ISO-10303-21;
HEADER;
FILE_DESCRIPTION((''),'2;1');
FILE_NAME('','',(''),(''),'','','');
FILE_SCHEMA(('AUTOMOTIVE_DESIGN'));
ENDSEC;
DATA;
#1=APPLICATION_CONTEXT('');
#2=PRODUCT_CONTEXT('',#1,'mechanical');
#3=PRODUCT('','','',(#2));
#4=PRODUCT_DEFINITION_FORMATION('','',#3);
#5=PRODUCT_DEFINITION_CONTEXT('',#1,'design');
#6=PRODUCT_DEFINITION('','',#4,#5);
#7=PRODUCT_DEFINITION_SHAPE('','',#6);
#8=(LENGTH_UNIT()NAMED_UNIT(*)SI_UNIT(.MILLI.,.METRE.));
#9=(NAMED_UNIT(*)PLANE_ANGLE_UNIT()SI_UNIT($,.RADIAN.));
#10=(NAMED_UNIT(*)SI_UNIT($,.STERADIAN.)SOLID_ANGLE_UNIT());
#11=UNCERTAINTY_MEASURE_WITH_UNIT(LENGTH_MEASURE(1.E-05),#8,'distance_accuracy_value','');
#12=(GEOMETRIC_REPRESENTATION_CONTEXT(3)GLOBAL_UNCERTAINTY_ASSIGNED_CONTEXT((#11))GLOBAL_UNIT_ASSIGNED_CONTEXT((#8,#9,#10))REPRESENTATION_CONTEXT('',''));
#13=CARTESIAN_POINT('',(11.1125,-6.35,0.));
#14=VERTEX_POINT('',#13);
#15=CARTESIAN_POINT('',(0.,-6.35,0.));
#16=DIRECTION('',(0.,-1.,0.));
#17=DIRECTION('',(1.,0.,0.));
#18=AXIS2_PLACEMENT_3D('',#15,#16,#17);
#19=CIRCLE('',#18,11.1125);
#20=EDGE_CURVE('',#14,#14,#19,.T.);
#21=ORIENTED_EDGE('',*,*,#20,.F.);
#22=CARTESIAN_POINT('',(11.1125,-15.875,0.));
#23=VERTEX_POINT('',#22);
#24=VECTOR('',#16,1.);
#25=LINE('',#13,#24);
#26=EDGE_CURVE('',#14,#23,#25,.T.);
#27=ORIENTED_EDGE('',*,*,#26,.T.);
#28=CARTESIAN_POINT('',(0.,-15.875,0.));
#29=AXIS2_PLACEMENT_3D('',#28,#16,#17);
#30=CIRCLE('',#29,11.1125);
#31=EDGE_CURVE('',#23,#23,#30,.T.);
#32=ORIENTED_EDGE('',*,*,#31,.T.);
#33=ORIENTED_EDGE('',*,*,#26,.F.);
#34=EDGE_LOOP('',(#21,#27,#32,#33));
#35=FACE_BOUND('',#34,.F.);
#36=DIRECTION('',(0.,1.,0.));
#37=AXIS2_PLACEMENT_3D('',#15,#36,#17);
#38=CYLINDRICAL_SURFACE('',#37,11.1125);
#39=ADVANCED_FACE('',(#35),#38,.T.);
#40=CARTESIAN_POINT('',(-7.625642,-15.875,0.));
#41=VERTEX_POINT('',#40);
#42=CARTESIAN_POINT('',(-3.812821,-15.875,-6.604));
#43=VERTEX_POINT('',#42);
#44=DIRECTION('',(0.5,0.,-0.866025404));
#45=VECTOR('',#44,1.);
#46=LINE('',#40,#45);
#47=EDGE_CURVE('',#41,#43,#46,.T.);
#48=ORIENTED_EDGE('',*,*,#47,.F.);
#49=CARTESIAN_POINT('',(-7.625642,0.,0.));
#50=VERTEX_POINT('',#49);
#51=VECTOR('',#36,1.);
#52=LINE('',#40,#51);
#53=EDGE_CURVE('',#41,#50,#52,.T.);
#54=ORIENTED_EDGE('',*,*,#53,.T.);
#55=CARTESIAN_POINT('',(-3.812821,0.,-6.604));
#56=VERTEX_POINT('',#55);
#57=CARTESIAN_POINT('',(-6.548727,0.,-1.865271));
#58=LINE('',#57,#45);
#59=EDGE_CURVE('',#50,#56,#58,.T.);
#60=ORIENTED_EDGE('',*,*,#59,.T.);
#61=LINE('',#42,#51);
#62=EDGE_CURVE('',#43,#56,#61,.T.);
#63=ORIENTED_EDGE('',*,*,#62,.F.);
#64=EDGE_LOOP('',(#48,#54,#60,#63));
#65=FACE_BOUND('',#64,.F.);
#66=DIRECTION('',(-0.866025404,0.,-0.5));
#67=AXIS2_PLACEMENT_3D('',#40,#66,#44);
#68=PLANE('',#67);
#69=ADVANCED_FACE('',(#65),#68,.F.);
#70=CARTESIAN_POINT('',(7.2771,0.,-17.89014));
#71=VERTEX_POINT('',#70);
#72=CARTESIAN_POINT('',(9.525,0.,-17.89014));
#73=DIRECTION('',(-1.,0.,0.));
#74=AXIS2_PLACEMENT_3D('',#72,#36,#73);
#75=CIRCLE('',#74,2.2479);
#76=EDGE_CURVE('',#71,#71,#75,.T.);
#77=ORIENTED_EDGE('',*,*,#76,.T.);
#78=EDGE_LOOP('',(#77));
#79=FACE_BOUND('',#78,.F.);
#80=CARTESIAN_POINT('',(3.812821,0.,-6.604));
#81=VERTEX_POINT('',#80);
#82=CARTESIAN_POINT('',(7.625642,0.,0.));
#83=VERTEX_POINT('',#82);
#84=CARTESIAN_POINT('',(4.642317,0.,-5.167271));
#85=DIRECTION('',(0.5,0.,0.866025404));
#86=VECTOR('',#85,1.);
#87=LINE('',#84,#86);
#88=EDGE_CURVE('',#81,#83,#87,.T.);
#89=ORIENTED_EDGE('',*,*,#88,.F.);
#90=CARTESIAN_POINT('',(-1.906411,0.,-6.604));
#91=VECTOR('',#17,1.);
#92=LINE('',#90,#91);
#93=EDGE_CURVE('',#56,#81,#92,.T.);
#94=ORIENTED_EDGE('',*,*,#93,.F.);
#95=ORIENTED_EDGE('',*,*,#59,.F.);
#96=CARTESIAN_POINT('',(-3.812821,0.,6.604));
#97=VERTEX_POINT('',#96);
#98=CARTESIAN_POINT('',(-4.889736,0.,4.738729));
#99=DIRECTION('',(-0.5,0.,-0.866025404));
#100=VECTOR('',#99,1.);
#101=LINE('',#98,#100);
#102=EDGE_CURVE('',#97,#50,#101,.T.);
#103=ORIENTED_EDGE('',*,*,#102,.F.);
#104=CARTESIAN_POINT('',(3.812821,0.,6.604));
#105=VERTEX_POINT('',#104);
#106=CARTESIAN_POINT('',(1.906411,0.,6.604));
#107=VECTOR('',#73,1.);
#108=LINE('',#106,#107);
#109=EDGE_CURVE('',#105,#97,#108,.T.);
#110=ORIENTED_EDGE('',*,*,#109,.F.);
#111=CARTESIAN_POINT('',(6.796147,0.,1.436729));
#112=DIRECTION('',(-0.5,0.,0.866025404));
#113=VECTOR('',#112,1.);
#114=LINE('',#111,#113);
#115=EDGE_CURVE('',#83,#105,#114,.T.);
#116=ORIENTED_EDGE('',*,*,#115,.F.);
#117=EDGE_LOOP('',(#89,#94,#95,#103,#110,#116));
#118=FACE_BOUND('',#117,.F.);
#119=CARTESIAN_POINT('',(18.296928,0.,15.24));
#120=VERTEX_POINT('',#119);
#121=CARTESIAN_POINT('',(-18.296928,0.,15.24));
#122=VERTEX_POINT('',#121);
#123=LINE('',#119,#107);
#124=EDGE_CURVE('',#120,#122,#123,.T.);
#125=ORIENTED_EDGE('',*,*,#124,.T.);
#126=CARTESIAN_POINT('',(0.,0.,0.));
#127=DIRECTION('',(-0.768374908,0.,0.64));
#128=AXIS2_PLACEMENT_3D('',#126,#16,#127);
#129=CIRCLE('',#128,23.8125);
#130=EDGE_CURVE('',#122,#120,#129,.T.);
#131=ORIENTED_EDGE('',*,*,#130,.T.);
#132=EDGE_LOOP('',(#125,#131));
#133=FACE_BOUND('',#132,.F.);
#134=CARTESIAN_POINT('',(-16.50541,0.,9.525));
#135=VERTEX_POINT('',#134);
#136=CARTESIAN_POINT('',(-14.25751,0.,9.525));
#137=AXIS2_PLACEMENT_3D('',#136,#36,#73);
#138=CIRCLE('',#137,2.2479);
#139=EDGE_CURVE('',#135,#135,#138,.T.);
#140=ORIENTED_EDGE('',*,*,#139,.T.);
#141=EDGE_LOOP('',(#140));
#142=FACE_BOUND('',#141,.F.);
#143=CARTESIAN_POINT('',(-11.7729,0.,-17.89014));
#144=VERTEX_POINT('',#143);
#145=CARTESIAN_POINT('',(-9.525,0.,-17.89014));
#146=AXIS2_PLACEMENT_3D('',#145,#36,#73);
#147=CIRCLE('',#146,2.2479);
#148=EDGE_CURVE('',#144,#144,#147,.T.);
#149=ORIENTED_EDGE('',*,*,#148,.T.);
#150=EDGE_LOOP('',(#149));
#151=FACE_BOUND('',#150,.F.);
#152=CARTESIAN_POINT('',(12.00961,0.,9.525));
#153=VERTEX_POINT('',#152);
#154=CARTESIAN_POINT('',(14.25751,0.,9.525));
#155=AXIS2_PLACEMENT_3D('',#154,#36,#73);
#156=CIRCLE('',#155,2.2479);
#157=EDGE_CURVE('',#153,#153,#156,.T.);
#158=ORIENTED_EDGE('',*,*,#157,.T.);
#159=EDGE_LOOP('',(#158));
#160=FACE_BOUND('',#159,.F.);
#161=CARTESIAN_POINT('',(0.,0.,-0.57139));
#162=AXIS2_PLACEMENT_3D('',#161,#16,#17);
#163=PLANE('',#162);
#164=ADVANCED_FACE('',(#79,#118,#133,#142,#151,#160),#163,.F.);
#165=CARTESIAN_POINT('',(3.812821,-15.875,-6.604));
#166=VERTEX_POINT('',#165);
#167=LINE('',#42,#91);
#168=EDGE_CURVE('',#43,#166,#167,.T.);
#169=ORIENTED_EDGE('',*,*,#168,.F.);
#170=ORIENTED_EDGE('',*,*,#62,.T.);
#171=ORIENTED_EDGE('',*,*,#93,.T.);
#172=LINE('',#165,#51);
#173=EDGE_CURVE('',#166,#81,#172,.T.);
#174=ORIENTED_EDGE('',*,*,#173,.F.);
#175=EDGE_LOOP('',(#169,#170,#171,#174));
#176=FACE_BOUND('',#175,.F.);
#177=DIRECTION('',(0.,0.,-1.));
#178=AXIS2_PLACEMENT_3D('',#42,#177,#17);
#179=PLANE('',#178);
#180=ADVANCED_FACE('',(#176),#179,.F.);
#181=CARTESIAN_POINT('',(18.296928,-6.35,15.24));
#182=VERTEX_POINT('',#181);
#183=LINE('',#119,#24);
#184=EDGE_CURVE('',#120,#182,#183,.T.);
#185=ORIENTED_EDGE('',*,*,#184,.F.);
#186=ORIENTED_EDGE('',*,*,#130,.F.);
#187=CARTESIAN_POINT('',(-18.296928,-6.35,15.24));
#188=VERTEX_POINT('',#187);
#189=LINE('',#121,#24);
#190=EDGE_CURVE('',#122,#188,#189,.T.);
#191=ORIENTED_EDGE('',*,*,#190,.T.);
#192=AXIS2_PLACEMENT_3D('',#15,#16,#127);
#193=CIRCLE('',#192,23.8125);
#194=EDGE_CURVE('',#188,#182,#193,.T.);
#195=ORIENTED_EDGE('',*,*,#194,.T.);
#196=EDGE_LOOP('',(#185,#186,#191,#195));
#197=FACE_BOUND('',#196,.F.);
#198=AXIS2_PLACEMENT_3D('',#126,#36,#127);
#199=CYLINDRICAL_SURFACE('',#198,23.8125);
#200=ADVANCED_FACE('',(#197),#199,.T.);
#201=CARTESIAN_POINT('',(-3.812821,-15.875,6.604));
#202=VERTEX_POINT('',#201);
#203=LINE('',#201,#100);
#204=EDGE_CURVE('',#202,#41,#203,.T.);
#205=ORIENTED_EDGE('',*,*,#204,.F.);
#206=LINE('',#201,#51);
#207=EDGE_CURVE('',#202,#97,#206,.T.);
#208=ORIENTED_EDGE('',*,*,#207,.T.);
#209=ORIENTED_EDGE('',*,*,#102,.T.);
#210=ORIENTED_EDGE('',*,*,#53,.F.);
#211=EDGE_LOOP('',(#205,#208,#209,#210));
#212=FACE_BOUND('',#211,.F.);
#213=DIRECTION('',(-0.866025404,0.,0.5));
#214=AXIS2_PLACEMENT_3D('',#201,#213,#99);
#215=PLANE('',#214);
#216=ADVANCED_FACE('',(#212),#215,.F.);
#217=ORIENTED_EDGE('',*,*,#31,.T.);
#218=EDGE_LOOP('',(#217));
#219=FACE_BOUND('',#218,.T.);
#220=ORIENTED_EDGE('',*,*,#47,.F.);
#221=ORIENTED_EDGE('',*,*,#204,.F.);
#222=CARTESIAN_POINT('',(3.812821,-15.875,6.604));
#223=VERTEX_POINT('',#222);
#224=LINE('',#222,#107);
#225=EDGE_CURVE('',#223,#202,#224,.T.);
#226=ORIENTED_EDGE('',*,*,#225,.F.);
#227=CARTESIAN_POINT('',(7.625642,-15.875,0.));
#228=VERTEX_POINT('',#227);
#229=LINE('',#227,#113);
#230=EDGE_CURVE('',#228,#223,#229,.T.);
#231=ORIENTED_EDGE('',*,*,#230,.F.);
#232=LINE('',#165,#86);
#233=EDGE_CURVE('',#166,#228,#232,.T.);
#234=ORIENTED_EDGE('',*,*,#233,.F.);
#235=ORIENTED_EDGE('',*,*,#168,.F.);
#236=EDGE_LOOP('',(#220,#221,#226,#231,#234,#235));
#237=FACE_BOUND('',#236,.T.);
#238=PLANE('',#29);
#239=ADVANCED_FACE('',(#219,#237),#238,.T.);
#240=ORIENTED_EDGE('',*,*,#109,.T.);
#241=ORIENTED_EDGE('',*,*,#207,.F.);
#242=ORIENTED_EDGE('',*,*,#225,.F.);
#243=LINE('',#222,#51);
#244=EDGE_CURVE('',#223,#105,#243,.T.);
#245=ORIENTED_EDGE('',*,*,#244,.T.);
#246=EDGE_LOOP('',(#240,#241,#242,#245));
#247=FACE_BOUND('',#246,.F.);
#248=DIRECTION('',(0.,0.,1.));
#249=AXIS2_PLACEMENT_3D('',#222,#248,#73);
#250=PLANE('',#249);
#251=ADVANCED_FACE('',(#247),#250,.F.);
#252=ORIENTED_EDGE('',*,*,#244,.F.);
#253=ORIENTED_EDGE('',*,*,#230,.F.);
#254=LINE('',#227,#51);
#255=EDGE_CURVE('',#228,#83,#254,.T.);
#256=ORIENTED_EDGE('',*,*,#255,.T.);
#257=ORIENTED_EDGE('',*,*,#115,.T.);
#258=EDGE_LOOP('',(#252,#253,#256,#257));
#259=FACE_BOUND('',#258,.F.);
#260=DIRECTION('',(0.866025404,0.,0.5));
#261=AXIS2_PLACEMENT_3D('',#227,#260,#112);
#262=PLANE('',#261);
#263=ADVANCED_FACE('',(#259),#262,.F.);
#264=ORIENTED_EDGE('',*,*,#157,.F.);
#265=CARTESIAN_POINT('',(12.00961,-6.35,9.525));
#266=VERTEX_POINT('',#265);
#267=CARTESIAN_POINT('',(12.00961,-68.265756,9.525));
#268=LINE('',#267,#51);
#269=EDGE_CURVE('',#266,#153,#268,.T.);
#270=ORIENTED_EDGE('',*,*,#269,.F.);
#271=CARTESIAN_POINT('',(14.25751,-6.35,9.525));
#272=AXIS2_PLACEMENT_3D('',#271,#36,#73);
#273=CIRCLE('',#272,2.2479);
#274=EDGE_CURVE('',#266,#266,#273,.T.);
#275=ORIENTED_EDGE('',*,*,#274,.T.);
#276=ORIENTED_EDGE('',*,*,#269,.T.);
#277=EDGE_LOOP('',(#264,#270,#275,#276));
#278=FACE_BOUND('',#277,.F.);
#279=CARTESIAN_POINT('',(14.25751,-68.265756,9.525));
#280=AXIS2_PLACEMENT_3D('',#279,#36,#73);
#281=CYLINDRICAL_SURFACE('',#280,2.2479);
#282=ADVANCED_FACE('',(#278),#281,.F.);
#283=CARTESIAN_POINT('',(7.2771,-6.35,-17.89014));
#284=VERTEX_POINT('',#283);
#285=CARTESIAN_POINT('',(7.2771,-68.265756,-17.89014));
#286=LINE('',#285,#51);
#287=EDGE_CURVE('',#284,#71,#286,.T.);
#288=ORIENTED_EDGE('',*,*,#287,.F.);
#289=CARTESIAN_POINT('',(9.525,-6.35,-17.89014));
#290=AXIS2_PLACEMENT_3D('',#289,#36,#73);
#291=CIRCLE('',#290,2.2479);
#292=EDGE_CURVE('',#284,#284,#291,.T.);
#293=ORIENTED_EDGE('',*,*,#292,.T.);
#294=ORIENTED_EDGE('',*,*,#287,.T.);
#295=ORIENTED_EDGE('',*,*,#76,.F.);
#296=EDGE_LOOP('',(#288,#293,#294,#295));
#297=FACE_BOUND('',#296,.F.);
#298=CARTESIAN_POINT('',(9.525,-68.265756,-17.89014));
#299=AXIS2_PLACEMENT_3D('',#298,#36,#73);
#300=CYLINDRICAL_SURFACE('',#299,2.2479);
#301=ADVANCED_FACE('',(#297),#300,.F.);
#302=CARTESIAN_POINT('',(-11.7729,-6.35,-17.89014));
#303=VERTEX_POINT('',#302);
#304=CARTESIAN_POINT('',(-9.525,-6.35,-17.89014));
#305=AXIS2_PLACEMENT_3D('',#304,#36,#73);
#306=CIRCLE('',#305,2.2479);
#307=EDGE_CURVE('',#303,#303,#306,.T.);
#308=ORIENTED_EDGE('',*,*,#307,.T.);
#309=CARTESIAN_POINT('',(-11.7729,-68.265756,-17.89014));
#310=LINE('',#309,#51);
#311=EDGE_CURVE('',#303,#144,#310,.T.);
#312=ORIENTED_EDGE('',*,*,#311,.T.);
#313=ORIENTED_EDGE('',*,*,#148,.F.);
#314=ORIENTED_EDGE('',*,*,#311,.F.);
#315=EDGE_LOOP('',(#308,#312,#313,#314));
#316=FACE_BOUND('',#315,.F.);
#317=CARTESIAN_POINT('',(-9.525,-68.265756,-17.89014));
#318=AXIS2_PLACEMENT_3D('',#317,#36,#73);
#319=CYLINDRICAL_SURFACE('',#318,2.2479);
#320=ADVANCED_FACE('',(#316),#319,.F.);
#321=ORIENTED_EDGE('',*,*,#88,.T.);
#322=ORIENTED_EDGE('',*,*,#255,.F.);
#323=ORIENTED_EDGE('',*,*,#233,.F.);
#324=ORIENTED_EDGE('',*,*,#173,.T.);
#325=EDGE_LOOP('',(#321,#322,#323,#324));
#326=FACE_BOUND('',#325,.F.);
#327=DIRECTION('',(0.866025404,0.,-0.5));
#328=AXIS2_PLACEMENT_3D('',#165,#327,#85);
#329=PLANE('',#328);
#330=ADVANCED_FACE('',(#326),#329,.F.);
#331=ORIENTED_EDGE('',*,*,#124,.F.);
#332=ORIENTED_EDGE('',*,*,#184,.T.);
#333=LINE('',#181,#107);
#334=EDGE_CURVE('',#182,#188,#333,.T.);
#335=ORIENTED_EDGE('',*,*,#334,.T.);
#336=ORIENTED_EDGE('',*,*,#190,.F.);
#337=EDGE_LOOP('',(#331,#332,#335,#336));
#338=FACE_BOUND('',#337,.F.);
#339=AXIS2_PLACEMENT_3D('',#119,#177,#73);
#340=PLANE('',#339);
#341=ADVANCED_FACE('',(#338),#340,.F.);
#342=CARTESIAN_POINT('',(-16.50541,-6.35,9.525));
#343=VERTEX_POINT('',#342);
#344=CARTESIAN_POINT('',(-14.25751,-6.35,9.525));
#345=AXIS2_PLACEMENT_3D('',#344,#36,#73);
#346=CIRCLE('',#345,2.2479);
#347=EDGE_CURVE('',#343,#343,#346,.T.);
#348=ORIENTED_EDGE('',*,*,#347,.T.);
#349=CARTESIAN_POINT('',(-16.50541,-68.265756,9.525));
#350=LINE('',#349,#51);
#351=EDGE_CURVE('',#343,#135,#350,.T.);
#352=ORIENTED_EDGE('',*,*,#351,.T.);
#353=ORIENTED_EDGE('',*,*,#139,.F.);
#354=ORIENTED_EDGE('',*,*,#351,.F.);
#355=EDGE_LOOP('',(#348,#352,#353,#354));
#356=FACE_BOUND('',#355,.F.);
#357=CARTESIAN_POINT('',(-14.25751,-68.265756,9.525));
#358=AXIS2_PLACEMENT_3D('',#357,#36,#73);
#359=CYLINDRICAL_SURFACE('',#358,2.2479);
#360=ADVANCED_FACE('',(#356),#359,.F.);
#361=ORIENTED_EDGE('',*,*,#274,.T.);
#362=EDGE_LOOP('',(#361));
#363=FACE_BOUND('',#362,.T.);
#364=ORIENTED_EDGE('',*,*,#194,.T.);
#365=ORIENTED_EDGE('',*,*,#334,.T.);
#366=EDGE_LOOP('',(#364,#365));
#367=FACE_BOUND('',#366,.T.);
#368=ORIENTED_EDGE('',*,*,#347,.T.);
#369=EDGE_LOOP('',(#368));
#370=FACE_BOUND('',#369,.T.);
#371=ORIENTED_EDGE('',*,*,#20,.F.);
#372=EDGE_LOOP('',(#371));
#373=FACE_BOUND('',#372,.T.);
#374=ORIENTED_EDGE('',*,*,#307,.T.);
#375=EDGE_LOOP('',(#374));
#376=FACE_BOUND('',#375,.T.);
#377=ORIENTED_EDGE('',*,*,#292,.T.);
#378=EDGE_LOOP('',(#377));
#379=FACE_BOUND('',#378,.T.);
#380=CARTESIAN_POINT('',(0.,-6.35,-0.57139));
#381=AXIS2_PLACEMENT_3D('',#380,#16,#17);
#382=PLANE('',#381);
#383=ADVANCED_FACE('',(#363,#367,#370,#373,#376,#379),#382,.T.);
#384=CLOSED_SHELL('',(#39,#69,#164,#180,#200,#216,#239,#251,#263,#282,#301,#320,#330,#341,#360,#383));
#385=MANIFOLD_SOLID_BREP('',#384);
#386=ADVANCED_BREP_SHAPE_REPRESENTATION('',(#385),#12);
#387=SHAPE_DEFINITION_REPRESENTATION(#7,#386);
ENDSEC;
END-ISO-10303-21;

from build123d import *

# Parameters (mm, degrees)
F1_DEPTH = 6.35
F3_D     = 4.4958
F4_R     = 11.1125
F5_DEPTH = 9.525
F7_DEPTH = 15.876


with BuildPart() as f1:
    # F0 (on Front) → F1 (new body)
    with BuildSketch(Plane.XZ):
        with BuildLine():
            Line((18.2969275085, 15.24), (-18.2969275085, 15.24))
            ThreePointArc((-18.2969275085, 15.24), (0, -23.8125), (18.2969275085, 15.24))
        make_face()
    extrude(amount=F1_DEPTH)

    # F3 (through all)
    with Locations(Plane.XZ.offset(6.35)):
        with Locations((-14.2575098316, 9.525), (14.2575098316, 9.525), (9.525, -17.8901402442), (-9.525, -17.8901402442)):
            Hole(F3_D / 2)

    # F4 (on face) → F5 (join)
    with BuildSketch(Plane.XZ.offset(6.35)):
        Circle(F4_R)
    extrude(amount=F5_DEPTH)

    # F6 (on face) → F7 (cut, through all)
    with BuildSketch(Plane.XZ.offset(15.875)):
        Polygon((3.8128211777, -6.604), (7.6256423555, 0), (3.8128211777, 6.604), (-3.8128211777, 6.604), (-7.6256423555, 0), (-3.8128211777, -6.604), align=None)
    extrude(amount=-F7_DEPTH, mode=Mode.SUBTRACT)


solid = f1.part
